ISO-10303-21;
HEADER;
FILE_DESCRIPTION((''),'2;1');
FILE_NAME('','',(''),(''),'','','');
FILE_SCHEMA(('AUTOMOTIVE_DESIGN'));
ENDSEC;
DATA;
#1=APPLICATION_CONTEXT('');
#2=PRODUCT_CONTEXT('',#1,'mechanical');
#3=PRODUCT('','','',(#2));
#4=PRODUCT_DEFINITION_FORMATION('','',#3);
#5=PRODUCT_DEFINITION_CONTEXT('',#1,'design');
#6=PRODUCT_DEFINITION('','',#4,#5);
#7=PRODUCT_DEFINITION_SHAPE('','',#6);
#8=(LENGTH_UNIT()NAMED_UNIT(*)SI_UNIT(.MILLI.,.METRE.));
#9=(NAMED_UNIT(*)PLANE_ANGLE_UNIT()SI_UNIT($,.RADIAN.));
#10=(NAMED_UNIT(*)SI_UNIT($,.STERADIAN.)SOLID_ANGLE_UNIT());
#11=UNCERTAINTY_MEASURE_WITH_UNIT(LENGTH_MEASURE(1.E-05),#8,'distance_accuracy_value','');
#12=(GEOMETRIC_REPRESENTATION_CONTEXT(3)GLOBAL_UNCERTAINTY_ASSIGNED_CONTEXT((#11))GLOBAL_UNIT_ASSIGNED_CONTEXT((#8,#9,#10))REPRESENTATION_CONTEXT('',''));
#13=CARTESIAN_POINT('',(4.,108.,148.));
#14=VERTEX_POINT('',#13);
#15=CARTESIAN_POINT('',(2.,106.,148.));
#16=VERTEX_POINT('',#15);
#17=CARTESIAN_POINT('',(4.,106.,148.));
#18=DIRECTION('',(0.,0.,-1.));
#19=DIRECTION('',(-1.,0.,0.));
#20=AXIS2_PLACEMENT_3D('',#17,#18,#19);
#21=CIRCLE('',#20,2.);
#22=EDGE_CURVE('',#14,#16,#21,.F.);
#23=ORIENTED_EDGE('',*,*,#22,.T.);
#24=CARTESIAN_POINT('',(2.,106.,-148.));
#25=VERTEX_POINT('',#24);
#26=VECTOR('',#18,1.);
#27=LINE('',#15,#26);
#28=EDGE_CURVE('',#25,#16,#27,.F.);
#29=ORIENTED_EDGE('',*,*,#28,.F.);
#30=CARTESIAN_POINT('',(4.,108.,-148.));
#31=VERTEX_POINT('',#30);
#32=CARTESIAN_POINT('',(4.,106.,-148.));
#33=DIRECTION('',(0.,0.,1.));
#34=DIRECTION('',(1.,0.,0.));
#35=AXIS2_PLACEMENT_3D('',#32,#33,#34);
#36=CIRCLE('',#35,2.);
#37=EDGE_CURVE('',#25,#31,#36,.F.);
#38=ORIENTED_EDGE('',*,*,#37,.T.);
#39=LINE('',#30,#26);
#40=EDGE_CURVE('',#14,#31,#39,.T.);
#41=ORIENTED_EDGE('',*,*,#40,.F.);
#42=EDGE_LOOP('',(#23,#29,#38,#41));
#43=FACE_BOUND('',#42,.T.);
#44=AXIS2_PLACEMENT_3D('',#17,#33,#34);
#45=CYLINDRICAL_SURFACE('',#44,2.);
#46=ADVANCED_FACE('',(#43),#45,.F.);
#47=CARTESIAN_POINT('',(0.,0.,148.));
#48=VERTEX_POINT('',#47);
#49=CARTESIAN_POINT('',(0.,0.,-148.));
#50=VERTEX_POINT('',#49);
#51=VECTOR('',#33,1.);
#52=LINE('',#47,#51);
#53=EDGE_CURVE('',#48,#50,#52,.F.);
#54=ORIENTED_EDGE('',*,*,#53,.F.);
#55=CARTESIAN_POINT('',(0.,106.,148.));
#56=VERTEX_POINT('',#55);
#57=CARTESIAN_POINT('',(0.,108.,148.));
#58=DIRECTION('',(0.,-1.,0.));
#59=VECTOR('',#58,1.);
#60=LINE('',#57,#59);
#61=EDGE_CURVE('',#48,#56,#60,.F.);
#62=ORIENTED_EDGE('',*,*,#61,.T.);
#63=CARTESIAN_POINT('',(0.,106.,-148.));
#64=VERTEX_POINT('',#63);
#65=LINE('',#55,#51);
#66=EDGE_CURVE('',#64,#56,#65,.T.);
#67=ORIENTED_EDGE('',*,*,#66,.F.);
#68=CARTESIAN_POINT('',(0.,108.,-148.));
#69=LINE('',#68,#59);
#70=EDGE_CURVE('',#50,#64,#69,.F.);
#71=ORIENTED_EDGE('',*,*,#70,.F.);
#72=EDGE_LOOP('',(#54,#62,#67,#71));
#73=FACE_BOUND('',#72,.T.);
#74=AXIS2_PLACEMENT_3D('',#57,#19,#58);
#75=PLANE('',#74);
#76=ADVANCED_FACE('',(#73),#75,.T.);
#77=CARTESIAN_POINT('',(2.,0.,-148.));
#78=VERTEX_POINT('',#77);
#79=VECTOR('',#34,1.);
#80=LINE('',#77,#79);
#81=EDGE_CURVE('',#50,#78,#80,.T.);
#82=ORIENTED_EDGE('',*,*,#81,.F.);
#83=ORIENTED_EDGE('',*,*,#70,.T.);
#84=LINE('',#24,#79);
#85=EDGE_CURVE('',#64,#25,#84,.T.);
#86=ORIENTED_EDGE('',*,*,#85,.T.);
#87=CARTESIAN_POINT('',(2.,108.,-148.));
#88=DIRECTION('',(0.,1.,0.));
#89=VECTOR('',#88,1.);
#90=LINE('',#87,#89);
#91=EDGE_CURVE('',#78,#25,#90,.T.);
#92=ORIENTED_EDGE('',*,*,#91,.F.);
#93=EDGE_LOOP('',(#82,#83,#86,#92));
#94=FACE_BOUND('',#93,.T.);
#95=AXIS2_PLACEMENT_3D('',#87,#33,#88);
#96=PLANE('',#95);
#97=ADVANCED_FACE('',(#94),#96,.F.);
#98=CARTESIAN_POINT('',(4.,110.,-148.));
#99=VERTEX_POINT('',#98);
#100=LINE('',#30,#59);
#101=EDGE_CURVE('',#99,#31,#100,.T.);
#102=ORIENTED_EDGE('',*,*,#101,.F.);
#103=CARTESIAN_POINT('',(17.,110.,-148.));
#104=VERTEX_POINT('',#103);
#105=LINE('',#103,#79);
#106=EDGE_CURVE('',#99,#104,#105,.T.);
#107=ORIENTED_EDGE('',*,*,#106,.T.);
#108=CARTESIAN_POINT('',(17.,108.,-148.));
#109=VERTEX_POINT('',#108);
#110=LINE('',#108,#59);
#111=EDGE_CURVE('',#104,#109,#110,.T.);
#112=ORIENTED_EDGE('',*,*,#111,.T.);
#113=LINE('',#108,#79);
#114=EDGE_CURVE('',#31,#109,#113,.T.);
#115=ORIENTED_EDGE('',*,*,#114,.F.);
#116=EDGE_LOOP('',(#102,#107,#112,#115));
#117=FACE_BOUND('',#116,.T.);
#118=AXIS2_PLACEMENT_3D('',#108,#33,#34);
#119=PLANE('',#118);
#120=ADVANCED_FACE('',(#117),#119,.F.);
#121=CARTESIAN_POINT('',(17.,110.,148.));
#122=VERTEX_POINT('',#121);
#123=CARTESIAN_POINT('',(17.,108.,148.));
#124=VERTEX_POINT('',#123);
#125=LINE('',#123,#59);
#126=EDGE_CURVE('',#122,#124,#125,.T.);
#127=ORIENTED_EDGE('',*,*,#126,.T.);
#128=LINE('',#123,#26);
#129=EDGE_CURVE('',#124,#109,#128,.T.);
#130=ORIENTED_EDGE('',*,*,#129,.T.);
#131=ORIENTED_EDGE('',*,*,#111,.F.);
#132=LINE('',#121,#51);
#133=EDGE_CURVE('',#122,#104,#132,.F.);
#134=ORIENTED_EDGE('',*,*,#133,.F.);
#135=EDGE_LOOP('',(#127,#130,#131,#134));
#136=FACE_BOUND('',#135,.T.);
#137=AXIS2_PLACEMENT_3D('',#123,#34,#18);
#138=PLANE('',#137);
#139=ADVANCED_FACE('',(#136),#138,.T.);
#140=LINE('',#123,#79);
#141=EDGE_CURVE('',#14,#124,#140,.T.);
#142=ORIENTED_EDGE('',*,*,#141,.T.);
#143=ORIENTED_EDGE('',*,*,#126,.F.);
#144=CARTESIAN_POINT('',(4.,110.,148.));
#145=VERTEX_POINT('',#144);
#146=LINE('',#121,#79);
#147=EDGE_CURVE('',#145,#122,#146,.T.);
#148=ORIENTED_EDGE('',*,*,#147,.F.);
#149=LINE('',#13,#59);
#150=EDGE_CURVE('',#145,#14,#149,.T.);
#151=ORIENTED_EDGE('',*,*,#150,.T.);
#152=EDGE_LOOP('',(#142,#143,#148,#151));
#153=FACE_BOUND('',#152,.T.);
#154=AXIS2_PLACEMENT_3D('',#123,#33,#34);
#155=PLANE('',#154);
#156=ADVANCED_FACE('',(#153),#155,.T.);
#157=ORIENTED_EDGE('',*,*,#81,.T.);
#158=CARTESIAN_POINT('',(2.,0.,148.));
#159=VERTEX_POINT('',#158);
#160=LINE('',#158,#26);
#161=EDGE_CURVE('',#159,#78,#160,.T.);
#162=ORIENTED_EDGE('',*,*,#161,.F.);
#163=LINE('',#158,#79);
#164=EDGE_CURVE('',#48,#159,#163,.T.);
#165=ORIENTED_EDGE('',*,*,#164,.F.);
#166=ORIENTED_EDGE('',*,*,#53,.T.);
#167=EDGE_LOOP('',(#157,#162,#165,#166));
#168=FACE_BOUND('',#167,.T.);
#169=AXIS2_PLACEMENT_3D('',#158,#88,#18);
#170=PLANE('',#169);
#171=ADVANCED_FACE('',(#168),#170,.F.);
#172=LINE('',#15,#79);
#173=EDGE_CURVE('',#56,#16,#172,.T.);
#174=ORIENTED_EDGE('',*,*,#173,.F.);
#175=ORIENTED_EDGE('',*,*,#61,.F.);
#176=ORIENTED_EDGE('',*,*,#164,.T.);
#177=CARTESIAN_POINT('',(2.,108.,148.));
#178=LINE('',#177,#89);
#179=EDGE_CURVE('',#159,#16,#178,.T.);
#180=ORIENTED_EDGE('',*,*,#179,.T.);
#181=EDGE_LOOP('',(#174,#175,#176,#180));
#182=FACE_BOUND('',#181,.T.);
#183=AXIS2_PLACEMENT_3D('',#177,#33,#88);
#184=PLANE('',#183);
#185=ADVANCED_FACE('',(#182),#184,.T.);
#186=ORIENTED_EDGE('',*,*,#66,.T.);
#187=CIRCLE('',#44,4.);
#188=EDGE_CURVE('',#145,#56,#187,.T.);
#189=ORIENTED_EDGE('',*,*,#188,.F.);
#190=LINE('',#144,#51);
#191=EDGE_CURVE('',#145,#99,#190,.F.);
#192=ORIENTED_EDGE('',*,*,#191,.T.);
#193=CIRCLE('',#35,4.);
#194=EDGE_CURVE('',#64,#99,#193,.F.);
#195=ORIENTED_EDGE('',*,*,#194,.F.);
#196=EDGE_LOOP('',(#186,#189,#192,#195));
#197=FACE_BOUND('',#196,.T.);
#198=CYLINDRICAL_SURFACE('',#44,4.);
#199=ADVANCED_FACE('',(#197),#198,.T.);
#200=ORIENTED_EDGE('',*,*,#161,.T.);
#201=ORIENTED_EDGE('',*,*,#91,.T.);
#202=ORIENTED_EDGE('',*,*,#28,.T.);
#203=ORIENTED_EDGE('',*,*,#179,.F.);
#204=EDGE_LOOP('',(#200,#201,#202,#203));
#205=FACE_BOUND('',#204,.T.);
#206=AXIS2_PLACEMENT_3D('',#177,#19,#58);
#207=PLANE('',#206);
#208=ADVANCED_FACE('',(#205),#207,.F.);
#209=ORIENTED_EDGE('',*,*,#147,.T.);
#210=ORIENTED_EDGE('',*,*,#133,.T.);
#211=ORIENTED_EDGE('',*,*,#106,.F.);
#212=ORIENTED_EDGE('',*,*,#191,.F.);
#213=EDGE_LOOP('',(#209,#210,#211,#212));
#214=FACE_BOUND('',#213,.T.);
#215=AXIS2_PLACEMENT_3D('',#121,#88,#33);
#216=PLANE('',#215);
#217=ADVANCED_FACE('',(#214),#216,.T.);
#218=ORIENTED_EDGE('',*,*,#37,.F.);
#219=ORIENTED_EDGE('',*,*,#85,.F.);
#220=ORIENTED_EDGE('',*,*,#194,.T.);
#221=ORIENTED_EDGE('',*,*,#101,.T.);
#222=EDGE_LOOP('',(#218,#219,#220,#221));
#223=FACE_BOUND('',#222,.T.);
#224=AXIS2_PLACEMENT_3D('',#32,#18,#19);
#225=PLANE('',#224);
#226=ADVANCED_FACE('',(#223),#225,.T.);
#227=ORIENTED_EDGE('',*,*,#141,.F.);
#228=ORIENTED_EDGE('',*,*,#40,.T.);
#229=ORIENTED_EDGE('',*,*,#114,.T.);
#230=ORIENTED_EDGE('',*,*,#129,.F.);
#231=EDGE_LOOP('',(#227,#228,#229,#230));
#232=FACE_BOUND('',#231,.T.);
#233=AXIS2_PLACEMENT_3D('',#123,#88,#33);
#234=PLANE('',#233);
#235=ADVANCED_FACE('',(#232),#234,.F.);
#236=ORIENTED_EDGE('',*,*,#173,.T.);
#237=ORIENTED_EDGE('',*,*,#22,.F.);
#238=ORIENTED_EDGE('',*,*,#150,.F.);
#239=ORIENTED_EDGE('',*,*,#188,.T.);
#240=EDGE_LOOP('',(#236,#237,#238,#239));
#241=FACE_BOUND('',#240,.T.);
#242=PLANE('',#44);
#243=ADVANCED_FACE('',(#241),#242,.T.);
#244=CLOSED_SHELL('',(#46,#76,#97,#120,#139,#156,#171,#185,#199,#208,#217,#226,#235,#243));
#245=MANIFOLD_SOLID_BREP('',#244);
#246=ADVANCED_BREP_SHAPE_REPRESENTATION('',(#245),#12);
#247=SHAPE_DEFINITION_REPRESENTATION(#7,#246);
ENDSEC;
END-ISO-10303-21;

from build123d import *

# Parameters (mm, degrees)
BOSS_EXTRUDE1_DEPTH    = 148
CONVERT_SOLID1_START   = -148
CONVERT_SOLID1_DEPTH   = 296
CONVERT_SOLID1_2_DEPTH = 296


# Read off the part's stored shape, not the designer's step: Convert-Solid1
with BuildPart() as part:
    # Sketch1 → Boss-Extrude1 (new, symmetric)
    with BuildSketch(Plane.XY):
        Polygon((0, 0), (0, 110), (17, 110), (17, 108), (2, 108), (2, 0), align=None)
    extrude(amount=BOSS_EXTRUDE1_DEPTH, both=True)

    # Convert-Solid1 outline → Convert-Solid1 (cut)
    with BuildSketch(Plane.XY.offset(CONVERT_SOLID1_START)):
        with BuildLine():
            ThreePointArc((0, 106), (1.171572875, 108.828427125), (4, 110))
            Line((4, 110), (0, 110))
            Line((0, 110), (0, 106))
        make_face()
    extrude(amount=CONVERT_SOLID1_DEPTH, mode=Mode.SUBTRACT)

    # Convert-Solid1 2 outline → Convert-Solid1 2 (add)
    with BuildSketch(Plane.XY.offset(CONVERT_SOLID1_START)):
        with BuildLine():
            ThreePointArc((2, 106), (2.585786438, 107.414213562), (4, 108))
            Line((4, 108), (2, 108))
            Line((2, 108), (2, 106))
        make_face()
    extrude(amount=CONVERT_SOLID1_2_DEPTH)


solid = part.part
